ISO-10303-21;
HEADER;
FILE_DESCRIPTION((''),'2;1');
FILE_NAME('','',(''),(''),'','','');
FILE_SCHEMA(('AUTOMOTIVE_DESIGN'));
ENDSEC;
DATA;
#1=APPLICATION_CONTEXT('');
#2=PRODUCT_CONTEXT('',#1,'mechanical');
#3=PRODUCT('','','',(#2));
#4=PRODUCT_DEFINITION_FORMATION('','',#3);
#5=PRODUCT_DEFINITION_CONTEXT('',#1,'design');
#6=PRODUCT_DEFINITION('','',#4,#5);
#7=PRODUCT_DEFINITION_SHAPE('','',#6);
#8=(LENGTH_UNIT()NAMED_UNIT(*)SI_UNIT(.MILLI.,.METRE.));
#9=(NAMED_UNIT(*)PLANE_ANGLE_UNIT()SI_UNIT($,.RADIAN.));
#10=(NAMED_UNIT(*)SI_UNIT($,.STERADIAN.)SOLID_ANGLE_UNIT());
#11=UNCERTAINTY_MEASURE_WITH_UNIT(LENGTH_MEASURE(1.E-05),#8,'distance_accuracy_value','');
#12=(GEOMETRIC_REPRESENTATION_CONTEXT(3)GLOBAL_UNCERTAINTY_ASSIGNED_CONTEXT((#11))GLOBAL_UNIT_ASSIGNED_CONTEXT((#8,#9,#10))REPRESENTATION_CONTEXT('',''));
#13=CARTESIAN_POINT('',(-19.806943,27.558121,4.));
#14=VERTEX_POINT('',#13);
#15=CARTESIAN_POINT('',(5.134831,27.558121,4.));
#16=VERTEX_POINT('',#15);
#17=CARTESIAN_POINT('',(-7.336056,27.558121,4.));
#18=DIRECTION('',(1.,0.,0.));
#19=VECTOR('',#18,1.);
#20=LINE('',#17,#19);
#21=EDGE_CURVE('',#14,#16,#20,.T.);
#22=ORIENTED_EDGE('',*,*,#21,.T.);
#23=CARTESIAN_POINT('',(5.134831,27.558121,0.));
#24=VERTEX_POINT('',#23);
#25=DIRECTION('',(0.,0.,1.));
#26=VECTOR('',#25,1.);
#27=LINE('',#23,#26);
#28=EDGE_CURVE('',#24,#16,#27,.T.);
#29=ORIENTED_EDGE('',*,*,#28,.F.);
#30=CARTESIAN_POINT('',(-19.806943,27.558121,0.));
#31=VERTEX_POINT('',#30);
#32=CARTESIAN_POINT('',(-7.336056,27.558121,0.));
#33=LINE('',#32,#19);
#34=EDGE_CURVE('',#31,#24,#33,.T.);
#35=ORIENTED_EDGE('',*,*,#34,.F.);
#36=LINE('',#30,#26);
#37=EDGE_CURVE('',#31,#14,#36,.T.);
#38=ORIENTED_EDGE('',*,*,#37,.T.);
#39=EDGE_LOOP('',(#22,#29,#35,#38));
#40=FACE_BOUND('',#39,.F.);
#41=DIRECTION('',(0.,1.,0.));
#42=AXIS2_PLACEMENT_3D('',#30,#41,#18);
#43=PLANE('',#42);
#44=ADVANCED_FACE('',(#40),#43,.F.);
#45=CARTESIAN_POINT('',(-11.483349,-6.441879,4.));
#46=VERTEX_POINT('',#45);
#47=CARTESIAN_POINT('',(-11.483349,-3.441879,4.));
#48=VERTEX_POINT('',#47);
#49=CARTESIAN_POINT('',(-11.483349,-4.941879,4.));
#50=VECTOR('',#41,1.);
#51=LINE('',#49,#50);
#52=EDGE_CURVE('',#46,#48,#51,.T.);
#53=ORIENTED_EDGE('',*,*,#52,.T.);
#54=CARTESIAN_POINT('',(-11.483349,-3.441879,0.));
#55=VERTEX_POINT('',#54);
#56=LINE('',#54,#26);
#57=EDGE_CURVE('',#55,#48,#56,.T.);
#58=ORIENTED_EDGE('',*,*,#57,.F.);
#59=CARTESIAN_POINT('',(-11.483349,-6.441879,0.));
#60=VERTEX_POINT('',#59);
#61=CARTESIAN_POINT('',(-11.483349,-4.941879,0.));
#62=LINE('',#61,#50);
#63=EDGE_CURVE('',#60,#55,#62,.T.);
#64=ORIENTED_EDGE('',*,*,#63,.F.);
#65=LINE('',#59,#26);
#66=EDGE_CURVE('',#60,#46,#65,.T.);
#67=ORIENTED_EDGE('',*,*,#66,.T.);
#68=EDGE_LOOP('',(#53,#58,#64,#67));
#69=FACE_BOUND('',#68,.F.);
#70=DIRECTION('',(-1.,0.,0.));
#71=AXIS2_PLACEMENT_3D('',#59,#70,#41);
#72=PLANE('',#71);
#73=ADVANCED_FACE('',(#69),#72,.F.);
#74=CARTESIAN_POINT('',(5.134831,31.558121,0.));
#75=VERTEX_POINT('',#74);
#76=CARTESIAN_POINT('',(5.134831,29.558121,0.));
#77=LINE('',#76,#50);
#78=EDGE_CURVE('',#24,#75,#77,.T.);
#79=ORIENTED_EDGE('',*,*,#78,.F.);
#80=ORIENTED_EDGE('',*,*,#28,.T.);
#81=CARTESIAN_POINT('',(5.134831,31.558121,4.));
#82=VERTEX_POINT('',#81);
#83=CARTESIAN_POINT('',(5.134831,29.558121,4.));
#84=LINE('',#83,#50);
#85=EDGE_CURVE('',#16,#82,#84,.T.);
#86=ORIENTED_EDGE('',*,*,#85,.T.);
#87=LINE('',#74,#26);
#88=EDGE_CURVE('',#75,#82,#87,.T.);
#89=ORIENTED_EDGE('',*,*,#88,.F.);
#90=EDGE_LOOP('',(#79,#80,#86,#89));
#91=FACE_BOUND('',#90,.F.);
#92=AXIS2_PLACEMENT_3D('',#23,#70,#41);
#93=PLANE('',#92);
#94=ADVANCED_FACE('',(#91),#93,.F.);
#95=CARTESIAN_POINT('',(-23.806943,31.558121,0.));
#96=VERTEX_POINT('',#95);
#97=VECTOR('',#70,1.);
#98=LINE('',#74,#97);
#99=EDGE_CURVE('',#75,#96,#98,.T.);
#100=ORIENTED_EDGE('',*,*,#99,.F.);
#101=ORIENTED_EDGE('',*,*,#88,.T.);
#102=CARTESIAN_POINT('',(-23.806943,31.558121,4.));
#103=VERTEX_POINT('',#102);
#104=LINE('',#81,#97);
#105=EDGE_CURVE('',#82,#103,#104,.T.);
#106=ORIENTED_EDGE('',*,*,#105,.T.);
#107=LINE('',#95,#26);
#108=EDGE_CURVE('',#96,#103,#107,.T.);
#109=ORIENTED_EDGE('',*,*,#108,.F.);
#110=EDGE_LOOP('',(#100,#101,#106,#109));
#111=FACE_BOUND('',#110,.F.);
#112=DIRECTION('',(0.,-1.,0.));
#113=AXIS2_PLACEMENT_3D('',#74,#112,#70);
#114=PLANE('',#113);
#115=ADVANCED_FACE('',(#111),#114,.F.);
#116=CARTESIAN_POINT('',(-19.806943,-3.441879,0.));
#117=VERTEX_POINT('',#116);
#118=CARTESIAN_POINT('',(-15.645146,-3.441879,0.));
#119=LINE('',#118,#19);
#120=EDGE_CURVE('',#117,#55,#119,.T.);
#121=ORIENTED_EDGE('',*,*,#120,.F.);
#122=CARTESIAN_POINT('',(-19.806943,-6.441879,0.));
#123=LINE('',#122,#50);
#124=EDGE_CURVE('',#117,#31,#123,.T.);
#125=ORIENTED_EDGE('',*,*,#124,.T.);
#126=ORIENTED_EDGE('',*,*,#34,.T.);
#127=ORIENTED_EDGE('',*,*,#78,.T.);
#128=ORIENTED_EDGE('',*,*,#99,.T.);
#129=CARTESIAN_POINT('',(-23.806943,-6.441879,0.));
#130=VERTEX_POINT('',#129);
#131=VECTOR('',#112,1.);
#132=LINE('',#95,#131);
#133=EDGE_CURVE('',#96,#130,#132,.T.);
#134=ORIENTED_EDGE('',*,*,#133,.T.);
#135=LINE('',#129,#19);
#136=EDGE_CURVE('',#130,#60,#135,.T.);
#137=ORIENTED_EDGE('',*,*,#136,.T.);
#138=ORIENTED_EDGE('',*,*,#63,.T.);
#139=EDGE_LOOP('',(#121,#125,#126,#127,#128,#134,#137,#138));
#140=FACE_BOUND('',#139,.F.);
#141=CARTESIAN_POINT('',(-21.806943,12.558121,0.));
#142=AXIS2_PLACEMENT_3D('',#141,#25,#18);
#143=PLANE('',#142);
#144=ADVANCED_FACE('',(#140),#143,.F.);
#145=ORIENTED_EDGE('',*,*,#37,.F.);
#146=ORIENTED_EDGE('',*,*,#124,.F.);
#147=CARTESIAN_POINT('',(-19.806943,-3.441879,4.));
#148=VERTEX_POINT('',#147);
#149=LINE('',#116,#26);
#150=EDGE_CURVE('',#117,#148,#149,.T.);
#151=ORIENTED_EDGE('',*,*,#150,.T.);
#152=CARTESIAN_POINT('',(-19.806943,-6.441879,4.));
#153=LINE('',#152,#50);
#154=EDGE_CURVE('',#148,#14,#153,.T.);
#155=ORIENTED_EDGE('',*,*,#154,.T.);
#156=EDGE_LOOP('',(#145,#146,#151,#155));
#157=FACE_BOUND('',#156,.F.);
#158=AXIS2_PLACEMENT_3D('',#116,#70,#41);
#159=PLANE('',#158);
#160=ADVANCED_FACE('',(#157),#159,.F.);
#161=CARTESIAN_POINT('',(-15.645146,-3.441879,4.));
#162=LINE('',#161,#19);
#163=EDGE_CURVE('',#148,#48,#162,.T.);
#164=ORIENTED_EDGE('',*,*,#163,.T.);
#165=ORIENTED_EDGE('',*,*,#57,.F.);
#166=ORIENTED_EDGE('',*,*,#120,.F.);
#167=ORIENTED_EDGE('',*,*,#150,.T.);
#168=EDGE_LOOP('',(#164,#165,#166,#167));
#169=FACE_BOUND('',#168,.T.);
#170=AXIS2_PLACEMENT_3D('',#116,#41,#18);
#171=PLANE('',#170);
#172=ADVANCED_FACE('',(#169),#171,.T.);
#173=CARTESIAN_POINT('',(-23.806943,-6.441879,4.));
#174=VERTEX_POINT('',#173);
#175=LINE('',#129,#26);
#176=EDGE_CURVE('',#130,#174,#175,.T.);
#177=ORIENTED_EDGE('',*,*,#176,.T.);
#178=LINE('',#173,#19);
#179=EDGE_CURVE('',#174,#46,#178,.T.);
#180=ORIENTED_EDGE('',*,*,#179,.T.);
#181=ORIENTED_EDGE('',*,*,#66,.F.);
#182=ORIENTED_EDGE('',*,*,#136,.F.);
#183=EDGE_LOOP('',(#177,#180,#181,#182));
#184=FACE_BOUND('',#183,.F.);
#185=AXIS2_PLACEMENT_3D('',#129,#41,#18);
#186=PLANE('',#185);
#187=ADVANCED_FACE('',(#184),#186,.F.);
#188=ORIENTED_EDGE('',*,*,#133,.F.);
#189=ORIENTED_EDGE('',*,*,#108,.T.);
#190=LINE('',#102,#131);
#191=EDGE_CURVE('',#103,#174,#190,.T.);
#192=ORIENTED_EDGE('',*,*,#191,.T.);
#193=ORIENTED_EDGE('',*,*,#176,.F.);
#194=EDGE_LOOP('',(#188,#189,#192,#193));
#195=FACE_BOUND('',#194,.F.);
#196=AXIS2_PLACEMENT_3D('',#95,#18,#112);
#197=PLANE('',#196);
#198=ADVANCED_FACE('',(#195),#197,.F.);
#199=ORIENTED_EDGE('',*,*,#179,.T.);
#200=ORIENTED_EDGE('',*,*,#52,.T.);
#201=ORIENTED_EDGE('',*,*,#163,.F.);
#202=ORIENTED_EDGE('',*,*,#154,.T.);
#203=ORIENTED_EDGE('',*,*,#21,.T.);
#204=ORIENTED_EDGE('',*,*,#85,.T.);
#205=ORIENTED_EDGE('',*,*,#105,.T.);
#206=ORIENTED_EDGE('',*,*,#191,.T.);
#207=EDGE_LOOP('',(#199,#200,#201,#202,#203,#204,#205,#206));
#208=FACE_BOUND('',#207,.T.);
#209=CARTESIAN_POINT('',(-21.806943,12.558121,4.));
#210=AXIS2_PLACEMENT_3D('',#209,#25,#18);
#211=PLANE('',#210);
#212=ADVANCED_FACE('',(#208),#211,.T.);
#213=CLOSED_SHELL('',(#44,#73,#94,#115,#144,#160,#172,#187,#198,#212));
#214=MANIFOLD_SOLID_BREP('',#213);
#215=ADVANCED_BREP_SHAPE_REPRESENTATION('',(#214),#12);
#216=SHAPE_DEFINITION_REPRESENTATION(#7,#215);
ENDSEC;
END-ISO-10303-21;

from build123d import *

# Parameters (mm, degrees)
F0_W     = 24.9417738095
F0_H     = 4
F0_W_2   = 8.3235937208
F0_H_2   = 3
F1_DEPTH = 4


# Not quite as in the source:
# - the program builds the solid bodies; features that only make, move or delete a surface that nothing else refers to are left out


with BuildPart() as f1:
    # F0 (on Top) → F1 (new body)
    with BuildSketch(Plane.XY):
        Polygon((-19.8069426268, 31.5581213795), (-23.8069426268, 31.5581213795), (-23.8069426268, -6.4418786205), (-19.8069426268, -6.4418786205), (-19.8069426268, -3.4418786205), (-19.8069426268, 27.5581213795), align=None)
        with Locations((-7.3360557221, 29.5581213795)):
            Rectangle(F0_W, F0_H)
        with Locations((-15.6451457664, -4.9418786205)):
            Rectangle(F0_W_2, F0_H_2)
    extrude(amount=F1_DEPTH)


solid = f1.part
